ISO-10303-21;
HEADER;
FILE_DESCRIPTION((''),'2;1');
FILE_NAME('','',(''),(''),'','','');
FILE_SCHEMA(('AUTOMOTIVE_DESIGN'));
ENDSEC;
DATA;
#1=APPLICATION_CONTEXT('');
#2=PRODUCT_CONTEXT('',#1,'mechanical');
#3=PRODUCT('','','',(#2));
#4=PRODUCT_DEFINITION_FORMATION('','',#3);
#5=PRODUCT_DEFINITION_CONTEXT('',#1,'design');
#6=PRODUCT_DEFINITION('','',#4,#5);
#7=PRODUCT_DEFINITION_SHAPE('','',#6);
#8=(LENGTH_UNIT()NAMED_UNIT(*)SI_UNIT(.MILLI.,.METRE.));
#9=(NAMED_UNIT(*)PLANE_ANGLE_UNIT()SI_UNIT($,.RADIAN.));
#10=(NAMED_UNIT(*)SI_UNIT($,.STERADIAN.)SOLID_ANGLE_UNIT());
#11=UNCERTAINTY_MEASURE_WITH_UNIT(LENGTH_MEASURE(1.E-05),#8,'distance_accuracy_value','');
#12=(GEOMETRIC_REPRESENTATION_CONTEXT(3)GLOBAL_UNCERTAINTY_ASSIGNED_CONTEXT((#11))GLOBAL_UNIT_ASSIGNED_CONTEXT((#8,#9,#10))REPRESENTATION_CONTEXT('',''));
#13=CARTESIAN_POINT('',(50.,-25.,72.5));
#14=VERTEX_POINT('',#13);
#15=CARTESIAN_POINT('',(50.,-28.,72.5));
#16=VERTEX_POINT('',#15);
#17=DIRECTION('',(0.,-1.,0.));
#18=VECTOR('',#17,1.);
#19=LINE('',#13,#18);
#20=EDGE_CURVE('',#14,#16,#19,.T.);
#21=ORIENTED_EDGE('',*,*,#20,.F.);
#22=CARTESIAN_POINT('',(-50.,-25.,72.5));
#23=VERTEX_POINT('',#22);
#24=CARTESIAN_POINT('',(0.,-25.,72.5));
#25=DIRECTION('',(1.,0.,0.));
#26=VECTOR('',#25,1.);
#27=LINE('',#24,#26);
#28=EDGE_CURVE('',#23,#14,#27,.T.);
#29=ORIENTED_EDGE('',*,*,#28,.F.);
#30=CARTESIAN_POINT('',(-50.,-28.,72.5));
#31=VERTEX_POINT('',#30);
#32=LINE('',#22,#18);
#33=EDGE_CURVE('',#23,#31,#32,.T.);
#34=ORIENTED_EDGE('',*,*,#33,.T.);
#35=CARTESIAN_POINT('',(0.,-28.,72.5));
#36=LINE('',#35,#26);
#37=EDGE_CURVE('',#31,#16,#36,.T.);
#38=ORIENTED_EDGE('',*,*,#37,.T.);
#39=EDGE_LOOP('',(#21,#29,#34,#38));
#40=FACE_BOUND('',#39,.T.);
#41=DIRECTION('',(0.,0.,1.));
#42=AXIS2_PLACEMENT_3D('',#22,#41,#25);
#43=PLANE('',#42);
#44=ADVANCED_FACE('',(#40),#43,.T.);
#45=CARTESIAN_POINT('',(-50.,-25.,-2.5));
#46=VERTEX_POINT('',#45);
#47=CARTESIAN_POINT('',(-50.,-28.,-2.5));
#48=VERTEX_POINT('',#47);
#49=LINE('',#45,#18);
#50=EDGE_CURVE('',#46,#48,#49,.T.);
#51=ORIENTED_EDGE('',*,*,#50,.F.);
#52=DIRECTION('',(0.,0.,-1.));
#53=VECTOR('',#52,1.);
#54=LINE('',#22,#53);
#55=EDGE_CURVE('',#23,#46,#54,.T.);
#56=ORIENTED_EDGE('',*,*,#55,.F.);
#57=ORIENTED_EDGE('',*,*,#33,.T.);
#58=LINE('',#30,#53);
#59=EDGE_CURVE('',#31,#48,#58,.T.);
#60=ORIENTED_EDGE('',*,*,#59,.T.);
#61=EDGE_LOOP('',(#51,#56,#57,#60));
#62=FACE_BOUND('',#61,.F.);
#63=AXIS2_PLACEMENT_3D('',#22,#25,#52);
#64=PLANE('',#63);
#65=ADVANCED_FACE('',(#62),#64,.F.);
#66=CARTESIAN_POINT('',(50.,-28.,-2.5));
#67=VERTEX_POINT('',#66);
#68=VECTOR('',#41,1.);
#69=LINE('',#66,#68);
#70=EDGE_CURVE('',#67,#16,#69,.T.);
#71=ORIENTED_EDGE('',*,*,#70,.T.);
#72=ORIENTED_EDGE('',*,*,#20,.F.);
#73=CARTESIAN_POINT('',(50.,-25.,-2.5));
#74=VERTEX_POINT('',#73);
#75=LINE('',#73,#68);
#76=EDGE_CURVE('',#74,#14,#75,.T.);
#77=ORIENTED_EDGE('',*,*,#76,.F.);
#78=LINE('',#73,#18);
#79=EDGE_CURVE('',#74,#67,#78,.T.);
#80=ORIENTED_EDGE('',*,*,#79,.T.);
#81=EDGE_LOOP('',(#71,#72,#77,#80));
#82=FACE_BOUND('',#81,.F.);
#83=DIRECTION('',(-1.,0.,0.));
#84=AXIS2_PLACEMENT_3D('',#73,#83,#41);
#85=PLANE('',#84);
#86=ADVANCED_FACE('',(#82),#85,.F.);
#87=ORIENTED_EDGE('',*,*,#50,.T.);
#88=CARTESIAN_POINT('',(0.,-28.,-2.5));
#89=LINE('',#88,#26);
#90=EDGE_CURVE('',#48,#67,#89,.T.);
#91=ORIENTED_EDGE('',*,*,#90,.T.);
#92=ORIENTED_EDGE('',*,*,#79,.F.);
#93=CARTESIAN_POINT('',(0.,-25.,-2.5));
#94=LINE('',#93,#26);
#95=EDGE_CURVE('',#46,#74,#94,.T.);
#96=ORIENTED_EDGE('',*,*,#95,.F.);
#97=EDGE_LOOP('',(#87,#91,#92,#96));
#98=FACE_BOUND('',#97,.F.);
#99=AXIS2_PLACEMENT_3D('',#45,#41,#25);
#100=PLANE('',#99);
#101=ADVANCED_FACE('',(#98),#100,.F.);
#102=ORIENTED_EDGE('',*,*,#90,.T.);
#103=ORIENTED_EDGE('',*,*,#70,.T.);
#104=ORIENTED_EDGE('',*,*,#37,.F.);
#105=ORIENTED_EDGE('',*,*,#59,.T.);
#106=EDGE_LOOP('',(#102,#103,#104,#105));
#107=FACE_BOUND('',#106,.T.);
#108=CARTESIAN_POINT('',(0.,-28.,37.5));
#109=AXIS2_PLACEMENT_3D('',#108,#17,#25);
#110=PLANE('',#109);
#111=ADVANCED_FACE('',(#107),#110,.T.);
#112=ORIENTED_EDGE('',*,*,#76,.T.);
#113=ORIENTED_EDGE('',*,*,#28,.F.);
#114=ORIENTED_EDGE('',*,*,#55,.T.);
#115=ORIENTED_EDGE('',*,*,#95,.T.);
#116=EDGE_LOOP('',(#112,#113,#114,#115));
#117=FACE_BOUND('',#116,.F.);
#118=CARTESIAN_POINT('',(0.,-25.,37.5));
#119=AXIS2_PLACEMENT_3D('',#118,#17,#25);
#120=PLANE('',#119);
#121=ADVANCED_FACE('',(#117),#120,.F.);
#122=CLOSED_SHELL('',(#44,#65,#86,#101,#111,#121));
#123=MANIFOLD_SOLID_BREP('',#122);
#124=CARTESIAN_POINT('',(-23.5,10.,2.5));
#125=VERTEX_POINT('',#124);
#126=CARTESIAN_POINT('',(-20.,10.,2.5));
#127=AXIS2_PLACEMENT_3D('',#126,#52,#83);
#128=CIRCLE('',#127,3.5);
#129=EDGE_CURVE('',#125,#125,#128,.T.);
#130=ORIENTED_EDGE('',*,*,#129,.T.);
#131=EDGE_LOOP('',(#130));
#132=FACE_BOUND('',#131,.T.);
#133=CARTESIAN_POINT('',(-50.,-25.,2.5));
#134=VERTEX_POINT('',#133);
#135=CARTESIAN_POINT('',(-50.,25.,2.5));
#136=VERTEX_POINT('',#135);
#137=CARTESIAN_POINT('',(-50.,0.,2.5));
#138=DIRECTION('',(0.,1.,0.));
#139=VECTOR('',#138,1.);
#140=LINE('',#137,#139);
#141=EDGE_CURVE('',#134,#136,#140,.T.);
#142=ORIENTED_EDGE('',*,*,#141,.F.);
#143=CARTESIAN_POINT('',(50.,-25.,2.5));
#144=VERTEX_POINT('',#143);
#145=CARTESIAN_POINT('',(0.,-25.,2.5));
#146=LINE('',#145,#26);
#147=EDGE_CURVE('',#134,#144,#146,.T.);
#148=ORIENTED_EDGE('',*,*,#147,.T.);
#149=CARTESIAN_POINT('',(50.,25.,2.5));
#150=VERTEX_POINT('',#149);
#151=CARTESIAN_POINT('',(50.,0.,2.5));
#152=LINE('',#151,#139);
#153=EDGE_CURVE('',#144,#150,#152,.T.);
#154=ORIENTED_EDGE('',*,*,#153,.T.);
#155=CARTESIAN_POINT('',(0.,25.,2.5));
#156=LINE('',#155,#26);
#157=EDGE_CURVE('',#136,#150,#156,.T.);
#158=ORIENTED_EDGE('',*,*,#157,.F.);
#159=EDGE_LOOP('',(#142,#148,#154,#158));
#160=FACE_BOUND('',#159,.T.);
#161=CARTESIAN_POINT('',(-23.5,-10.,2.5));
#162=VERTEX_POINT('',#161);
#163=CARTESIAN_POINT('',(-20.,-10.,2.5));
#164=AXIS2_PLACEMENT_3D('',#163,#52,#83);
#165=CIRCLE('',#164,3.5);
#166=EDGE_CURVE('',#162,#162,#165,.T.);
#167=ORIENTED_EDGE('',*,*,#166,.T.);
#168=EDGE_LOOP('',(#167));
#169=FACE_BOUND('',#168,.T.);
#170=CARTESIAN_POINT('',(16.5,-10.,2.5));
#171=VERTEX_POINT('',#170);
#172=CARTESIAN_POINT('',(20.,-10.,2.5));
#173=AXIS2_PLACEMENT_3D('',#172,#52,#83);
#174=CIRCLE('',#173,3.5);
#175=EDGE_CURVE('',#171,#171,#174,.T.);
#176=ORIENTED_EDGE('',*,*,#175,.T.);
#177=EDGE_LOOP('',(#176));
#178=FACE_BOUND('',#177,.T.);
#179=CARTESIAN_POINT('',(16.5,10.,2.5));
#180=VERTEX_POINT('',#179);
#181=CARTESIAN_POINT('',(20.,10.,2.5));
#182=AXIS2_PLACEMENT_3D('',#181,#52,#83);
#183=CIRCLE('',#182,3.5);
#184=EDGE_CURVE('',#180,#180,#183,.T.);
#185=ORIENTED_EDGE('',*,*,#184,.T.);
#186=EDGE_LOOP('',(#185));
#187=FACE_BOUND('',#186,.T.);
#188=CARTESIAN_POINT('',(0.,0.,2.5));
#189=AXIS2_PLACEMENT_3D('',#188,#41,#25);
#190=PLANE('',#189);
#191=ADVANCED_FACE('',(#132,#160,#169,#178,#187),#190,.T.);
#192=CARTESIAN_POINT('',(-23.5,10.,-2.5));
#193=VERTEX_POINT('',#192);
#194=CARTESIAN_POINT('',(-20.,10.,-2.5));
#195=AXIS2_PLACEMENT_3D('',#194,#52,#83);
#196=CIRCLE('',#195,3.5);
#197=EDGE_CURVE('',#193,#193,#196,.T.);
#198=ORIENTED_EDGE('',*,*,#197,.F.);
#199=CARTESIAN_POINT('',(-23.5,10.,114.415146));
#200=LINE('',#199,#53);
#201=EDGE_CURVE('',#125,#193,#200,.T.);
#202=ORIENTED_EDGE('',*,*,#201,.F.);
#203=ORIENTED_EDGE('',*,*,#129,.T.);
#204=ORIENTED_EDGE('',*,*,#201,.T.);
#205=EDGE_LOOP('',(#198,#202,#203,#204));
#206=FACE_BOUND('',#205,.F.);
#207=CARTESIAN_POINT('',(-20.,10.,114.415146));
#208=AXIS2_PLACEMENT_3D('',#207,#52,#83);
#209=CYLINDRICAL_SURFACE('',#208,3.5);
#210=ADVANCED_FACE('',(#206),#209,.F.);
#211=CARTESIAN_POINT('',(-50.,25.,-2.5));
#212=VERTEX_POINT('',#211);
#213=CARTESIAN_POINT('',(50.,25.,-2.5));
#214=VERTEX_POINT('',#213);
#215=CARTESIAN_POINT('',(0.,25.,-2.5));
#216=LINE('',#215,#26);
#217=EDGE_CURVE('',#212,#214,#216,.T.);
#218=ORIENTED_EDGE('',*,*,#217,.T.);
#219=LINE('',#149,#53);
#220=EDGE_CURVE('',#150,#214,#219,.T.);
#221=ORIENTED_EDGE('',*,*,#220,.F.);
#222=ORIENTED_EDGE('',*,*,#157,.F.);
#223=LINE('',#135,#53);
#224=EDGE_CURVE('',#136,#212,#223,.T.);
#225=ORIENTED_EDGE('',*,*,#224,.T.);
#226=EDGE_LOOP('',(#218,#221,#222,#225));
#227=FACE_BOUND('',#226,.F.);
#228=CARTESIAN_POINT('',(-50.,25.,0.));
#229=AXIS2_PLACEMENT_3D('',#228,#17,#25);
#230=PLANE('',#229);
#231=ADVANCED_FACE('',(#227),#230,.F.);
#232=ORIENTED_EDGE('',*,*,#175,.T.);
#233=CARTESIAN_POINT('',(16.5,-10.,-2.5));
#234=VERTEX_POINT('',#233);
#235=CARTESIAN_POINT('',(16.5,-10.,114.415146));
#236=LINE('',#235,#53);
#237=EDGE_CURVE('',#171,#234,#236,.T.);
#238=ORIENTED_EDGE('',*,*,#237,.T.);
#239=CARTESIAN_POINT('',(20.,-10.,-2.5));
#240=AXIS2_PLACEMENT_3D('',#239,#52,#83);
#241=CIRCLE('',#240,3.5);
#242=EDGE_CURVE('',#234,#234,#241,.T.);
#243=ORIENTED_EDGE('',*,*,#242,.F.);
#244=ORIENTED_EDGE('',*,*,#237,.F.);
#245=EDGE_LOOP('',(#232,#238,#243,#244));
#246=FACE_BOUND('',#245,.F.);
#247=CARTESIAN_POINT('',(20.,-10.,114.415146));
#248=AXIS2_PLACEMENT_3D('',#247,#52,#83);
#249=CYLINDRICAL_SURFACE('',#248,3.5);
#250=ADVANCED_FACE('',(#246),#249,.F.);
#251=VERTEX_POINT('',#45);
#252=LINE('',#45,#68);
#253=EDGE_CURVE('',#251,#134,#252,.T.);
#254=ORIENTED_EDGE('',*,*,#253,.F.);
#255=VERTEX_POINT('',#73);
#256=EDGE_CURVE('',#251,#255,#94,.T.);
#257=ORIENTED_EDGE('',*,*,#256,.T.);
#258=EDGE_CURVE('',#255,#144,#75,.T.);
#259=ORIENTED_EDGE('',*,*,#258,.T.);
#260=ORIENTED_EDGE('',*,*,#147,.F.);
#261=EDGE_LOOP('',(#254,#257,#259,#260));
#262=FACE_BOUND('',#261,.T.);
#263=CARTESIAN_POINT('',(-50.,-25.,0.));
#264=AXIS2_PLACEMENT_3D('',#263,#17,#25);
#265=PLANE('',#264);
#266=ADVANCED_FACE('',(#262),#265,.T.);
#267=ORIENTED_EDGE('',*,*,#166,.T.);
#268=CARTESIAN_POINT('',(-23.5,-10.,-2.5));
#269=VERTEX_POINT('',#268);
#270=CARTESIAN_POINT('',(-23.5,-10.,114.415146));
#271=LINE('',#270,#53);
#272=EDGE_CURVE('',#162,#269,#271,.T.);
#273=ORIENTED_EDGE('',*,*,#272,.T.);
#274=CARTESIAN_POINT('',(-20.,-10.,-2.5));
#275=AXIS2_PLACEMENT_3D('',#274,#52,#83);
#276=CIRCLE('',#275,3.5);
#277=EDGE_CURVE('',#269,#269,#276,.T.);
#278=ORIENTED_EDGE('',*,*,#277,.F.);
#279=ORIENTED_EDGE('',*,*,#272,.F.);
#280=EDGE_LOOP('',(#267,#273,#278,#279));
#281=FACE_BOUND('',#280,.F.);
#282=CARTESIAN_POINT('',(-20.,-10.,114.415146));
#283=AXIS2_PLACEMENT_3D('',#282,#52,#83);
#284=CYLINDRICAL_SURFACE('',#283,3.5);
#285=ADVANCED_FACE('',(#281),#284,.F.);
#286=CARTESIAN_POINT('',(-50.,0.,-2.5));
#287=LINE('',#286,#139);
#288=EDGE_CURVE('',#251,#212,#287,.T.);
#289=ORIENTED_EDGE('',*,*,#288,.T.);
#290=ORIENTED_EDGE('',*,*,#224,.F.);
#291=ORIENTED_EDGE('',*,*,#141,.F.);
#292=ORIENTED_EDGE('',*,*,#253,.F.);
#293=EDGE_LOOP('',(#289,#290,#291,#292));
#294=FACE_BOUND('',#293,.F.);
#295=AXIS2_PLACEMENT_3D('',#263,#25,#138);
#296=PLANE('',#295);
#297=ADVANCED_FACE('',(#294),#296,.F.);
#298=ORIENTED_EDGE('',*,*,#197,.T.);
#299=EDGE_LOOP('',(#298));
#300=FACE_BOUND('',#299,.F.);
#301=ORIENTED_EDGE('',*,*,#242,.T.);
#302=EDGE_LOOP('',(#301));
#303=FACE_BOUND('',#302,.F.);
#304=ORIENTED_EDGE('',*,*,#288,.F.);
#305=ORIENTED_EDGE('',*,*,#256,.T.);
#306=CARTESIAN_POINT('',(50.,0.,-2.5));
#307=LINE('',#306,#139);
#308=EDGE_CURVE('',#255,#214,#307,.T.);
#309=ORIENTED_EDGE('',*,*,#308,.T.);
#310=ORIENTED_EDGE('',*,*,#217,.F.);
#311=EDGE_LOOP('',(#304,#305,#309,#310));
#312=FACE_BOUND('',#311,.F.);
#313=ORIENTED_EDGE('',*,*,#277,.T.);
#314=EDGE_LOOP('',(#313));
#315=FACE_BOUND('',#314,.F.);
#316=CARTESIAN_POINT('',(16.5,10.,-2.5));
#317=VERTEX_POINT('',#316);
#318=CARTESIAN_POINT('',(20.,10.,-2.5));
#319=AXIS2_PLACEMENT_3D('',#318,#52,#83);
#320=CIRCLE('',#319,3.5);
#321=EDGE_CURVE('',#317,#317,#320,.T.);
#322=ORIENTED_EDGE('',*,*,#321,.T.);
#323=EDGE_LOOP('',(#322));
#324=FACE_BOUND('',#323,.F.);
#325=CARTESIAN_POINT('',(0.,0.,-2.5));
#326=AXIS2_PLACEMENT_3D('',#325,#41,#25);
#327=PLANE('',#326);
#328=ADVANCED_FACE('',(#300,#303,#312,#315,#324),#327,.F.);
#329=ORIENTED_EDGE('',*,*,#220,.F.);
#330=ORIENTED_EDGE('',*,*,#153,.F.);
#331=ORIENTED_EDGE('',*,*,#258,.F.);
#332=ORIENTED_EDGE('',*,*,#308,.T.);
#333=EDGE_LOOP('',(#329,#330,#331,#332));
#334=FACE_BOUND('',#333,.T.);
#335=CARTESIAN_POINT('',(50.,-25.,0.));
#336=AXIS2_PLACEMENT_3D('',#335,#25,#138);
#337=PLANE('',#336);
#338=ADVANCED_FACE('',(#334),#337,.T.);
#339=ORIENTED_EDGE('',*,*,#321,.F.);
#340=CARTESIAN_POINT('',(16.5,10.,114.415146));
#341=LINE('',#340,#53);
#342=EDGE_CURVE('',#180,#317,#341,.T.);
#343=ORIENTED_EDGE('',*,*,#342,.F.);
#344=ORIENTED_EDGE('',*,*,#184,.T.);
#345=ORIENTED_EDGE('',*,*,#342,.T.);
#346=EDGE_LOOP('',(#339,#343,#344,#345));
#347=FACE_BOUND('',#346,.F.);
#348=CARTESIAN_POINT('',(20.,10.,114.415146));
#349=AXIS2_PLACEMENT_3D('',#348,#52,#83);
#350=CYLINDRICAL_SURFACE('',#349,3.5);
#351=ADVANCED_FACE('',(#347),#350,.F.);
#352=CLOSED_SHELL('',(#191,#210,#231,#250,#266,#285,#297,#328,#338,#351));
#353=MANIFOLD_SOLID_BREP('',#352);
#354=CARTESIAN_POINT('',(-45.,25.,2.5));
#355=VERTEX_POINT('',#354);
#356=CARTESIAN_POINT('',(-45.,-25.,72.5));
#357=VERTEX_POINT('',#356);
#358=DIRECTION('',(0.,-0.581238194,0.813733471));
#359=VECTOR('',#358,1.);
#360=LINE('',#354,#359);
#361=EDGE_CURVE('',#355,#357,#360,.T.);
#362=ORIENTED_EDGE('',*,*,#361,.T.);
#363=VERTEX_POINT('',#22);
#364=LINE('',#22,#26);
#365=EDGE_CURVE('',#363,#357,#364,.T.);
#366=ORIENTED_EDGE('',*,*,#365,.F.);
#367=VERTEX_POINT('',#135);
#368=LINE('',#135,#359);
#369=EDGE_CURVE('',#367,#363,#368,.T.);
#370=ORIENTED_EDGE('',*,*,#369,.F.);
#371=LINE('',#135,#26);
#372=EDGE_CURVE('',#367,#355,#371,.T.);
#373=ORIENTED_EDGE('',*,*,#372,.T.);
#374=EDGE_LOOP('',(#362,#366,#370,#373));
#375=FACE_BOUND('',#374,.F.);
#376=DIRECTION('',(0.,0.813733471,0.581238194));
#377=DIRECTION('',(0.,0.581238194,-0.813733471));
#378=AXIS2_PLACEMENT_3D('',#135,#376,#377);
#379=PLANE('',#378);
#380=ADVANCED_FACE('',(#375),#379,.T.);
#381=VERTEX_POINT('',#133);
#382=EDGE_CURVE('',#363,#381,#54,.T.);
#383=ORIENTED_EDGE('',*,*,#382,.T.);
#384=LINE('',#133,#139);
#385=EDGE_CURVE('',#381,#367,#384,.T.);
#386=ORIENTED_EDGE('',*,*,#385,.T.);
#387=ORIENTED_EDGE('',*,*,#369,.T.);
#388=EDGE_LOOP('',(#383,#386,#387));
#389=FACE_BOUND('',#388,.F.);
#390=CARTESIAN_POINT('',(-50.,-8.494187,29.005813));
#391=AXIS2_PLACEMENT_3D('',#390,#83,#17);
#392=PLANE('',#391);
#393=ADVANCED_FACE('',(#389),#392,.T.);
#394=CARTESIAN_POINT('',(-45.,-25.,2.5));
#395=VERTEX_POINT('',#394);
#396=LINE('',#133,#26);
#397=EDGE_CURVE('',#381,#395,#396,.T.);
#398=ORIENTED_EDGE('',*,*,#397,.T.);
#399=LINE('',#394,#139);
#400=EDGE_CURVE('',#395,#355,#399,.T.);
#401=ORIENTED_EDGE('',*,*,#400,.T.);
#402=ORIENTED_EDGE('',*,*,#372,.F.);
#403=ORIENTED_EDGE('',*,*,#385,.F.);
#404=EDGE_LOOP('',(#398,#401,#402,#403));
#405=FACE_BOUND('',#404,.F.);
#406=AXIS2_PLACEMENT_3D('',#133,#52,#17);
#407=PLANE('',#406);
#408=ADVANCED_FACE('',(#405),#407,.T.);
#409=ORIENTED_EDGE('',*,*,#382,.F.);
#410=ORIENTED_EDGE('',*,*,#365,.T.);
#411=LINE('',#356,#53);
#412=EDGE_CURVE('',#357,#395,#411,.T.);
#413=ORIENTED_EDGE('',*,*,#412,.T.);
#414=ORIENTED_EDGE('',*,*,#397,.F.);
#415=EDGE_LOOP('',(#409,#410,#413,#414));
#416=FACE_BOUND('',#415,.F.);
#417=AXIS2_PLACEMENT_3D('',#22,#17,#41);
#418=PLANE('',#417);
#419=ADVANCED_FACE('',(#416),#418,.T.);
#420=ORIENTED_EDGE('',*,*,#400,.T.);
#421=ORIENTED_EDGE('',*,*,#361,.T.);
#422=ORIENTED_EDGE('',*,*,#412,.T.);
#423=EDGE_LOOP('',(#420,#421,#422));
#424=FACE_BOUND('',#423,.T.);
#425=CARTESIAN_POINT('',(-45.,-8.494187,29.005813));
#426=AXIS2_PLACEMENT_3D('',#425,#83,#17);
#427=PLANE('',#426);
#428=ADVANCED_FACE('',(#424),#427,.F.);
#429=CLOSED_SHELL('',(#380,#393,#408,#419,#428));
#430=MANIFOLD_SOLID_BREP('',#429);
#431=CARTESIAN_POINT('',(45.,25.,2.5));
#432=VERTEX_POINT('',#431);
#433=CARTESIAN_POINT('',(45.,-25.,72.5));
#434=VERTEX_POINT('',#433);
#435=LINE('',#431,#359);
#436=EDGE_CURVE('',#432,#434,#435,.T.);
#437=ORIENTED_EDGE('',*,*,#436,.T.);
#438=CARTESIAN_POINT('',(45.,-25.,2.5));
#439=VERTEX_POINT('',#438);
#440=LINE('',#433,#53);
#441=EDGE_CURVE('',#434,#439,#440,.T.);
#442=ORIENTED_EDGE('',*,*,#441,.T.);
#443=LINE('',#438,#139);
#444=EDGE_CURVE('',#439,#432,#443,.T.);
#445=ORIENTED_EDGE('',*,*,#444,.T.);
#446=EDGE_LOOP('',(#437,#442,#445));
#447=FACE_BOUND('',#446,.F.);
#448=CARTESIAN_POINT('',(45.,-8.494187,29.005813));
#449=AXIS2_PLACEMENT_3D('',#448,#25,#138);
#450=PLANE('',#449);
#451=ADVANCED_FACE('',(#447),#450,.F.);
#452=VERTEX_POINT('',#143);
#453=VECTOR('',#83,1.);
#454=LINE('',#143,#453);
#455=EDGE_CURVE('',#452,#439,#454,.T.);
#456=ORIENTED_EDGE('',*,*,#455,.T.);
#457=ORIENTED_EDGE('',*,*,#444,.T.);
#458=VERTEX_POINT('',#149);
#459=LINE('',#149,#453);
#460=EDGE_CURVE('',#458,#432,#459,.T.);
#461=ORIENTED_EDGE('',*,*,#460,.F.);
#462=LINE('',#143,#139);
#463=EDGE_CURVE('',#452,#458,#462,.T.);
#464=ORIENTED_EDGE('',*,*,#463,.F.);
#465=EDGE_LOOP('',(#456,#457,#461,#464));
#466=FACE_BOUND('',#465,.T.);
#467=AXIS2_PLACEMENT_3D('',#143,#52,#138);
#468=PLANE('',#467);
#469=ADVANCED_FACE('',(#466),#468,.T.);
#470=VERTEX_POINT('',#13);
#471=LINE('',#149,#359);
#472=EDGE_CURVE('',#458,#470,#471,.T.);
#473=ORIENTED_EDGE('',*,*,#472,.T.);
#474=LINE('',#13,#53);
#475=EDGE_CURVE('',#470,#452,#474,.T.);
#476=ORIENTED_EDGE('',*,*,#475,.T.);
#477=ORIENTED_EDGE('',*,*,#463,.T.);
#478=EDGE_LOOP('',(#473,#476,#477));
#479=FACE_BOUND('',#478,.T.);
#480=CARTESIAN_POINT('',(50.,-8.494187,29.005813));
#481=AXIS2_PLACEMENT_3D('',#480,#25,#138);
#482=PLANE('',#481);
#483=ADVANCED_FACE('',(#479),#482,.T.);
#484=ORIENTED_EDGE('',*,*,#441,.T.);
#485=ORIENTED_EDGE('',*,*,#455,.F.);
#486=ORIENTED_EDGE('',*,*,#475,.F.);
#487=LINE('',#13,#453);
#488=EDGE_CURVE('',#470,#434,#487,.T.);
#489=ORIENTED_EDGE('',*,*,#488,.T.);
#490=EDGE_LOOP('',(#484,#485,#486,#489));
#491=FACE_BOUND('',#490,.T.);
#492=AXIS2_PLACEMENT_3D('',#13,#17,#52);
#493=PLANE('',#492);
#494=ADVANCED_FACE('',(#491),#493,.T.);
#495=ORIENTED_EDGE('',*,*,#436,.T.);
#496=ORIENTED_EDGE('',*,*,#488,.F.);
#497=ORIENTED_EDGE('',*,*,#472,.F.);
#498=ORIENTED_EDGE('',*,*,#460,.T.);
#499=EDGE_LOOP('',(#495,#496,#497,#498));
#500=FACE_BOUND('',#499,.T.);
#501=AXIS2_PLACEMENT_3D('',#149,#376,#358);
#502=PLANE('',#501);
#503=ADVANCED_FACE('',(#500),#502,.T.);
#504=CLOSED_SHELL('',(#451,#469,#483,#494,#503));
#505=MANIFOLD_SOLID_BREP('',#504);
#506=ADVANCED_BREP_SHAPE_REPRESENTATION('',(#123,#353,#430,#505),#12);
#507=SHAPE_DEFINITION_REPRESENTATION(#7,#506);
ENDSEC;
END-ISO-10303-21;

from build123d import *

# Parameters (mm, degrees)
F0_W     = 100
F0_H     = 50
F1_DEPTH = 2.5
F2_W     = 100
F2_H     = 70
F2_H_2   = 5
F3_DEPTH = 3
F5_DEPTH = 5
F8_D     = 7


with BuildPart() as f1:
    # F0 (on Top) → F1 (new body, symmetric)
    with BuildSketch(Plane.XY):
        Rectangle(F0_W, F0_H)
    extrude(amount=F1_DEPTH, both=True)

    # F8 (through all)
    with Locations(Plane.XY.offset(2.5)):
        with Locations((-20, -10), (20, -10), (-20, 10), (20, 10)):
            Hole(F8_D / 2)


with BuildPart() as f3:
    # F2 (on face) → F3 (new body)
    with BuildSketch(Plane.XZ.offset(25)):
        with Locations((0, 37.5)):
            Rectangle(F2_W, F2_H)
        Rectangle(F2_W, F2_H_2)
    extrude(amount=F3_DEPTH)


with BuildPart() as f5:
    # F4 (on face) → F5 (new body)
    with BuildSketch(Plane.YZ.offset(50)):
        Polygon((25, 2.5), (-25, 72.5), (-25, 2.5), align=None)
    extrude(amount=-F5_DEPTH)


with BuildPart() as f6_1:
    # F6: instance of F5
    add(f5.part.mirror(Plane.YZ))


solid = Compound([f1.part, f3.part, f5.part, f6_1.part])
